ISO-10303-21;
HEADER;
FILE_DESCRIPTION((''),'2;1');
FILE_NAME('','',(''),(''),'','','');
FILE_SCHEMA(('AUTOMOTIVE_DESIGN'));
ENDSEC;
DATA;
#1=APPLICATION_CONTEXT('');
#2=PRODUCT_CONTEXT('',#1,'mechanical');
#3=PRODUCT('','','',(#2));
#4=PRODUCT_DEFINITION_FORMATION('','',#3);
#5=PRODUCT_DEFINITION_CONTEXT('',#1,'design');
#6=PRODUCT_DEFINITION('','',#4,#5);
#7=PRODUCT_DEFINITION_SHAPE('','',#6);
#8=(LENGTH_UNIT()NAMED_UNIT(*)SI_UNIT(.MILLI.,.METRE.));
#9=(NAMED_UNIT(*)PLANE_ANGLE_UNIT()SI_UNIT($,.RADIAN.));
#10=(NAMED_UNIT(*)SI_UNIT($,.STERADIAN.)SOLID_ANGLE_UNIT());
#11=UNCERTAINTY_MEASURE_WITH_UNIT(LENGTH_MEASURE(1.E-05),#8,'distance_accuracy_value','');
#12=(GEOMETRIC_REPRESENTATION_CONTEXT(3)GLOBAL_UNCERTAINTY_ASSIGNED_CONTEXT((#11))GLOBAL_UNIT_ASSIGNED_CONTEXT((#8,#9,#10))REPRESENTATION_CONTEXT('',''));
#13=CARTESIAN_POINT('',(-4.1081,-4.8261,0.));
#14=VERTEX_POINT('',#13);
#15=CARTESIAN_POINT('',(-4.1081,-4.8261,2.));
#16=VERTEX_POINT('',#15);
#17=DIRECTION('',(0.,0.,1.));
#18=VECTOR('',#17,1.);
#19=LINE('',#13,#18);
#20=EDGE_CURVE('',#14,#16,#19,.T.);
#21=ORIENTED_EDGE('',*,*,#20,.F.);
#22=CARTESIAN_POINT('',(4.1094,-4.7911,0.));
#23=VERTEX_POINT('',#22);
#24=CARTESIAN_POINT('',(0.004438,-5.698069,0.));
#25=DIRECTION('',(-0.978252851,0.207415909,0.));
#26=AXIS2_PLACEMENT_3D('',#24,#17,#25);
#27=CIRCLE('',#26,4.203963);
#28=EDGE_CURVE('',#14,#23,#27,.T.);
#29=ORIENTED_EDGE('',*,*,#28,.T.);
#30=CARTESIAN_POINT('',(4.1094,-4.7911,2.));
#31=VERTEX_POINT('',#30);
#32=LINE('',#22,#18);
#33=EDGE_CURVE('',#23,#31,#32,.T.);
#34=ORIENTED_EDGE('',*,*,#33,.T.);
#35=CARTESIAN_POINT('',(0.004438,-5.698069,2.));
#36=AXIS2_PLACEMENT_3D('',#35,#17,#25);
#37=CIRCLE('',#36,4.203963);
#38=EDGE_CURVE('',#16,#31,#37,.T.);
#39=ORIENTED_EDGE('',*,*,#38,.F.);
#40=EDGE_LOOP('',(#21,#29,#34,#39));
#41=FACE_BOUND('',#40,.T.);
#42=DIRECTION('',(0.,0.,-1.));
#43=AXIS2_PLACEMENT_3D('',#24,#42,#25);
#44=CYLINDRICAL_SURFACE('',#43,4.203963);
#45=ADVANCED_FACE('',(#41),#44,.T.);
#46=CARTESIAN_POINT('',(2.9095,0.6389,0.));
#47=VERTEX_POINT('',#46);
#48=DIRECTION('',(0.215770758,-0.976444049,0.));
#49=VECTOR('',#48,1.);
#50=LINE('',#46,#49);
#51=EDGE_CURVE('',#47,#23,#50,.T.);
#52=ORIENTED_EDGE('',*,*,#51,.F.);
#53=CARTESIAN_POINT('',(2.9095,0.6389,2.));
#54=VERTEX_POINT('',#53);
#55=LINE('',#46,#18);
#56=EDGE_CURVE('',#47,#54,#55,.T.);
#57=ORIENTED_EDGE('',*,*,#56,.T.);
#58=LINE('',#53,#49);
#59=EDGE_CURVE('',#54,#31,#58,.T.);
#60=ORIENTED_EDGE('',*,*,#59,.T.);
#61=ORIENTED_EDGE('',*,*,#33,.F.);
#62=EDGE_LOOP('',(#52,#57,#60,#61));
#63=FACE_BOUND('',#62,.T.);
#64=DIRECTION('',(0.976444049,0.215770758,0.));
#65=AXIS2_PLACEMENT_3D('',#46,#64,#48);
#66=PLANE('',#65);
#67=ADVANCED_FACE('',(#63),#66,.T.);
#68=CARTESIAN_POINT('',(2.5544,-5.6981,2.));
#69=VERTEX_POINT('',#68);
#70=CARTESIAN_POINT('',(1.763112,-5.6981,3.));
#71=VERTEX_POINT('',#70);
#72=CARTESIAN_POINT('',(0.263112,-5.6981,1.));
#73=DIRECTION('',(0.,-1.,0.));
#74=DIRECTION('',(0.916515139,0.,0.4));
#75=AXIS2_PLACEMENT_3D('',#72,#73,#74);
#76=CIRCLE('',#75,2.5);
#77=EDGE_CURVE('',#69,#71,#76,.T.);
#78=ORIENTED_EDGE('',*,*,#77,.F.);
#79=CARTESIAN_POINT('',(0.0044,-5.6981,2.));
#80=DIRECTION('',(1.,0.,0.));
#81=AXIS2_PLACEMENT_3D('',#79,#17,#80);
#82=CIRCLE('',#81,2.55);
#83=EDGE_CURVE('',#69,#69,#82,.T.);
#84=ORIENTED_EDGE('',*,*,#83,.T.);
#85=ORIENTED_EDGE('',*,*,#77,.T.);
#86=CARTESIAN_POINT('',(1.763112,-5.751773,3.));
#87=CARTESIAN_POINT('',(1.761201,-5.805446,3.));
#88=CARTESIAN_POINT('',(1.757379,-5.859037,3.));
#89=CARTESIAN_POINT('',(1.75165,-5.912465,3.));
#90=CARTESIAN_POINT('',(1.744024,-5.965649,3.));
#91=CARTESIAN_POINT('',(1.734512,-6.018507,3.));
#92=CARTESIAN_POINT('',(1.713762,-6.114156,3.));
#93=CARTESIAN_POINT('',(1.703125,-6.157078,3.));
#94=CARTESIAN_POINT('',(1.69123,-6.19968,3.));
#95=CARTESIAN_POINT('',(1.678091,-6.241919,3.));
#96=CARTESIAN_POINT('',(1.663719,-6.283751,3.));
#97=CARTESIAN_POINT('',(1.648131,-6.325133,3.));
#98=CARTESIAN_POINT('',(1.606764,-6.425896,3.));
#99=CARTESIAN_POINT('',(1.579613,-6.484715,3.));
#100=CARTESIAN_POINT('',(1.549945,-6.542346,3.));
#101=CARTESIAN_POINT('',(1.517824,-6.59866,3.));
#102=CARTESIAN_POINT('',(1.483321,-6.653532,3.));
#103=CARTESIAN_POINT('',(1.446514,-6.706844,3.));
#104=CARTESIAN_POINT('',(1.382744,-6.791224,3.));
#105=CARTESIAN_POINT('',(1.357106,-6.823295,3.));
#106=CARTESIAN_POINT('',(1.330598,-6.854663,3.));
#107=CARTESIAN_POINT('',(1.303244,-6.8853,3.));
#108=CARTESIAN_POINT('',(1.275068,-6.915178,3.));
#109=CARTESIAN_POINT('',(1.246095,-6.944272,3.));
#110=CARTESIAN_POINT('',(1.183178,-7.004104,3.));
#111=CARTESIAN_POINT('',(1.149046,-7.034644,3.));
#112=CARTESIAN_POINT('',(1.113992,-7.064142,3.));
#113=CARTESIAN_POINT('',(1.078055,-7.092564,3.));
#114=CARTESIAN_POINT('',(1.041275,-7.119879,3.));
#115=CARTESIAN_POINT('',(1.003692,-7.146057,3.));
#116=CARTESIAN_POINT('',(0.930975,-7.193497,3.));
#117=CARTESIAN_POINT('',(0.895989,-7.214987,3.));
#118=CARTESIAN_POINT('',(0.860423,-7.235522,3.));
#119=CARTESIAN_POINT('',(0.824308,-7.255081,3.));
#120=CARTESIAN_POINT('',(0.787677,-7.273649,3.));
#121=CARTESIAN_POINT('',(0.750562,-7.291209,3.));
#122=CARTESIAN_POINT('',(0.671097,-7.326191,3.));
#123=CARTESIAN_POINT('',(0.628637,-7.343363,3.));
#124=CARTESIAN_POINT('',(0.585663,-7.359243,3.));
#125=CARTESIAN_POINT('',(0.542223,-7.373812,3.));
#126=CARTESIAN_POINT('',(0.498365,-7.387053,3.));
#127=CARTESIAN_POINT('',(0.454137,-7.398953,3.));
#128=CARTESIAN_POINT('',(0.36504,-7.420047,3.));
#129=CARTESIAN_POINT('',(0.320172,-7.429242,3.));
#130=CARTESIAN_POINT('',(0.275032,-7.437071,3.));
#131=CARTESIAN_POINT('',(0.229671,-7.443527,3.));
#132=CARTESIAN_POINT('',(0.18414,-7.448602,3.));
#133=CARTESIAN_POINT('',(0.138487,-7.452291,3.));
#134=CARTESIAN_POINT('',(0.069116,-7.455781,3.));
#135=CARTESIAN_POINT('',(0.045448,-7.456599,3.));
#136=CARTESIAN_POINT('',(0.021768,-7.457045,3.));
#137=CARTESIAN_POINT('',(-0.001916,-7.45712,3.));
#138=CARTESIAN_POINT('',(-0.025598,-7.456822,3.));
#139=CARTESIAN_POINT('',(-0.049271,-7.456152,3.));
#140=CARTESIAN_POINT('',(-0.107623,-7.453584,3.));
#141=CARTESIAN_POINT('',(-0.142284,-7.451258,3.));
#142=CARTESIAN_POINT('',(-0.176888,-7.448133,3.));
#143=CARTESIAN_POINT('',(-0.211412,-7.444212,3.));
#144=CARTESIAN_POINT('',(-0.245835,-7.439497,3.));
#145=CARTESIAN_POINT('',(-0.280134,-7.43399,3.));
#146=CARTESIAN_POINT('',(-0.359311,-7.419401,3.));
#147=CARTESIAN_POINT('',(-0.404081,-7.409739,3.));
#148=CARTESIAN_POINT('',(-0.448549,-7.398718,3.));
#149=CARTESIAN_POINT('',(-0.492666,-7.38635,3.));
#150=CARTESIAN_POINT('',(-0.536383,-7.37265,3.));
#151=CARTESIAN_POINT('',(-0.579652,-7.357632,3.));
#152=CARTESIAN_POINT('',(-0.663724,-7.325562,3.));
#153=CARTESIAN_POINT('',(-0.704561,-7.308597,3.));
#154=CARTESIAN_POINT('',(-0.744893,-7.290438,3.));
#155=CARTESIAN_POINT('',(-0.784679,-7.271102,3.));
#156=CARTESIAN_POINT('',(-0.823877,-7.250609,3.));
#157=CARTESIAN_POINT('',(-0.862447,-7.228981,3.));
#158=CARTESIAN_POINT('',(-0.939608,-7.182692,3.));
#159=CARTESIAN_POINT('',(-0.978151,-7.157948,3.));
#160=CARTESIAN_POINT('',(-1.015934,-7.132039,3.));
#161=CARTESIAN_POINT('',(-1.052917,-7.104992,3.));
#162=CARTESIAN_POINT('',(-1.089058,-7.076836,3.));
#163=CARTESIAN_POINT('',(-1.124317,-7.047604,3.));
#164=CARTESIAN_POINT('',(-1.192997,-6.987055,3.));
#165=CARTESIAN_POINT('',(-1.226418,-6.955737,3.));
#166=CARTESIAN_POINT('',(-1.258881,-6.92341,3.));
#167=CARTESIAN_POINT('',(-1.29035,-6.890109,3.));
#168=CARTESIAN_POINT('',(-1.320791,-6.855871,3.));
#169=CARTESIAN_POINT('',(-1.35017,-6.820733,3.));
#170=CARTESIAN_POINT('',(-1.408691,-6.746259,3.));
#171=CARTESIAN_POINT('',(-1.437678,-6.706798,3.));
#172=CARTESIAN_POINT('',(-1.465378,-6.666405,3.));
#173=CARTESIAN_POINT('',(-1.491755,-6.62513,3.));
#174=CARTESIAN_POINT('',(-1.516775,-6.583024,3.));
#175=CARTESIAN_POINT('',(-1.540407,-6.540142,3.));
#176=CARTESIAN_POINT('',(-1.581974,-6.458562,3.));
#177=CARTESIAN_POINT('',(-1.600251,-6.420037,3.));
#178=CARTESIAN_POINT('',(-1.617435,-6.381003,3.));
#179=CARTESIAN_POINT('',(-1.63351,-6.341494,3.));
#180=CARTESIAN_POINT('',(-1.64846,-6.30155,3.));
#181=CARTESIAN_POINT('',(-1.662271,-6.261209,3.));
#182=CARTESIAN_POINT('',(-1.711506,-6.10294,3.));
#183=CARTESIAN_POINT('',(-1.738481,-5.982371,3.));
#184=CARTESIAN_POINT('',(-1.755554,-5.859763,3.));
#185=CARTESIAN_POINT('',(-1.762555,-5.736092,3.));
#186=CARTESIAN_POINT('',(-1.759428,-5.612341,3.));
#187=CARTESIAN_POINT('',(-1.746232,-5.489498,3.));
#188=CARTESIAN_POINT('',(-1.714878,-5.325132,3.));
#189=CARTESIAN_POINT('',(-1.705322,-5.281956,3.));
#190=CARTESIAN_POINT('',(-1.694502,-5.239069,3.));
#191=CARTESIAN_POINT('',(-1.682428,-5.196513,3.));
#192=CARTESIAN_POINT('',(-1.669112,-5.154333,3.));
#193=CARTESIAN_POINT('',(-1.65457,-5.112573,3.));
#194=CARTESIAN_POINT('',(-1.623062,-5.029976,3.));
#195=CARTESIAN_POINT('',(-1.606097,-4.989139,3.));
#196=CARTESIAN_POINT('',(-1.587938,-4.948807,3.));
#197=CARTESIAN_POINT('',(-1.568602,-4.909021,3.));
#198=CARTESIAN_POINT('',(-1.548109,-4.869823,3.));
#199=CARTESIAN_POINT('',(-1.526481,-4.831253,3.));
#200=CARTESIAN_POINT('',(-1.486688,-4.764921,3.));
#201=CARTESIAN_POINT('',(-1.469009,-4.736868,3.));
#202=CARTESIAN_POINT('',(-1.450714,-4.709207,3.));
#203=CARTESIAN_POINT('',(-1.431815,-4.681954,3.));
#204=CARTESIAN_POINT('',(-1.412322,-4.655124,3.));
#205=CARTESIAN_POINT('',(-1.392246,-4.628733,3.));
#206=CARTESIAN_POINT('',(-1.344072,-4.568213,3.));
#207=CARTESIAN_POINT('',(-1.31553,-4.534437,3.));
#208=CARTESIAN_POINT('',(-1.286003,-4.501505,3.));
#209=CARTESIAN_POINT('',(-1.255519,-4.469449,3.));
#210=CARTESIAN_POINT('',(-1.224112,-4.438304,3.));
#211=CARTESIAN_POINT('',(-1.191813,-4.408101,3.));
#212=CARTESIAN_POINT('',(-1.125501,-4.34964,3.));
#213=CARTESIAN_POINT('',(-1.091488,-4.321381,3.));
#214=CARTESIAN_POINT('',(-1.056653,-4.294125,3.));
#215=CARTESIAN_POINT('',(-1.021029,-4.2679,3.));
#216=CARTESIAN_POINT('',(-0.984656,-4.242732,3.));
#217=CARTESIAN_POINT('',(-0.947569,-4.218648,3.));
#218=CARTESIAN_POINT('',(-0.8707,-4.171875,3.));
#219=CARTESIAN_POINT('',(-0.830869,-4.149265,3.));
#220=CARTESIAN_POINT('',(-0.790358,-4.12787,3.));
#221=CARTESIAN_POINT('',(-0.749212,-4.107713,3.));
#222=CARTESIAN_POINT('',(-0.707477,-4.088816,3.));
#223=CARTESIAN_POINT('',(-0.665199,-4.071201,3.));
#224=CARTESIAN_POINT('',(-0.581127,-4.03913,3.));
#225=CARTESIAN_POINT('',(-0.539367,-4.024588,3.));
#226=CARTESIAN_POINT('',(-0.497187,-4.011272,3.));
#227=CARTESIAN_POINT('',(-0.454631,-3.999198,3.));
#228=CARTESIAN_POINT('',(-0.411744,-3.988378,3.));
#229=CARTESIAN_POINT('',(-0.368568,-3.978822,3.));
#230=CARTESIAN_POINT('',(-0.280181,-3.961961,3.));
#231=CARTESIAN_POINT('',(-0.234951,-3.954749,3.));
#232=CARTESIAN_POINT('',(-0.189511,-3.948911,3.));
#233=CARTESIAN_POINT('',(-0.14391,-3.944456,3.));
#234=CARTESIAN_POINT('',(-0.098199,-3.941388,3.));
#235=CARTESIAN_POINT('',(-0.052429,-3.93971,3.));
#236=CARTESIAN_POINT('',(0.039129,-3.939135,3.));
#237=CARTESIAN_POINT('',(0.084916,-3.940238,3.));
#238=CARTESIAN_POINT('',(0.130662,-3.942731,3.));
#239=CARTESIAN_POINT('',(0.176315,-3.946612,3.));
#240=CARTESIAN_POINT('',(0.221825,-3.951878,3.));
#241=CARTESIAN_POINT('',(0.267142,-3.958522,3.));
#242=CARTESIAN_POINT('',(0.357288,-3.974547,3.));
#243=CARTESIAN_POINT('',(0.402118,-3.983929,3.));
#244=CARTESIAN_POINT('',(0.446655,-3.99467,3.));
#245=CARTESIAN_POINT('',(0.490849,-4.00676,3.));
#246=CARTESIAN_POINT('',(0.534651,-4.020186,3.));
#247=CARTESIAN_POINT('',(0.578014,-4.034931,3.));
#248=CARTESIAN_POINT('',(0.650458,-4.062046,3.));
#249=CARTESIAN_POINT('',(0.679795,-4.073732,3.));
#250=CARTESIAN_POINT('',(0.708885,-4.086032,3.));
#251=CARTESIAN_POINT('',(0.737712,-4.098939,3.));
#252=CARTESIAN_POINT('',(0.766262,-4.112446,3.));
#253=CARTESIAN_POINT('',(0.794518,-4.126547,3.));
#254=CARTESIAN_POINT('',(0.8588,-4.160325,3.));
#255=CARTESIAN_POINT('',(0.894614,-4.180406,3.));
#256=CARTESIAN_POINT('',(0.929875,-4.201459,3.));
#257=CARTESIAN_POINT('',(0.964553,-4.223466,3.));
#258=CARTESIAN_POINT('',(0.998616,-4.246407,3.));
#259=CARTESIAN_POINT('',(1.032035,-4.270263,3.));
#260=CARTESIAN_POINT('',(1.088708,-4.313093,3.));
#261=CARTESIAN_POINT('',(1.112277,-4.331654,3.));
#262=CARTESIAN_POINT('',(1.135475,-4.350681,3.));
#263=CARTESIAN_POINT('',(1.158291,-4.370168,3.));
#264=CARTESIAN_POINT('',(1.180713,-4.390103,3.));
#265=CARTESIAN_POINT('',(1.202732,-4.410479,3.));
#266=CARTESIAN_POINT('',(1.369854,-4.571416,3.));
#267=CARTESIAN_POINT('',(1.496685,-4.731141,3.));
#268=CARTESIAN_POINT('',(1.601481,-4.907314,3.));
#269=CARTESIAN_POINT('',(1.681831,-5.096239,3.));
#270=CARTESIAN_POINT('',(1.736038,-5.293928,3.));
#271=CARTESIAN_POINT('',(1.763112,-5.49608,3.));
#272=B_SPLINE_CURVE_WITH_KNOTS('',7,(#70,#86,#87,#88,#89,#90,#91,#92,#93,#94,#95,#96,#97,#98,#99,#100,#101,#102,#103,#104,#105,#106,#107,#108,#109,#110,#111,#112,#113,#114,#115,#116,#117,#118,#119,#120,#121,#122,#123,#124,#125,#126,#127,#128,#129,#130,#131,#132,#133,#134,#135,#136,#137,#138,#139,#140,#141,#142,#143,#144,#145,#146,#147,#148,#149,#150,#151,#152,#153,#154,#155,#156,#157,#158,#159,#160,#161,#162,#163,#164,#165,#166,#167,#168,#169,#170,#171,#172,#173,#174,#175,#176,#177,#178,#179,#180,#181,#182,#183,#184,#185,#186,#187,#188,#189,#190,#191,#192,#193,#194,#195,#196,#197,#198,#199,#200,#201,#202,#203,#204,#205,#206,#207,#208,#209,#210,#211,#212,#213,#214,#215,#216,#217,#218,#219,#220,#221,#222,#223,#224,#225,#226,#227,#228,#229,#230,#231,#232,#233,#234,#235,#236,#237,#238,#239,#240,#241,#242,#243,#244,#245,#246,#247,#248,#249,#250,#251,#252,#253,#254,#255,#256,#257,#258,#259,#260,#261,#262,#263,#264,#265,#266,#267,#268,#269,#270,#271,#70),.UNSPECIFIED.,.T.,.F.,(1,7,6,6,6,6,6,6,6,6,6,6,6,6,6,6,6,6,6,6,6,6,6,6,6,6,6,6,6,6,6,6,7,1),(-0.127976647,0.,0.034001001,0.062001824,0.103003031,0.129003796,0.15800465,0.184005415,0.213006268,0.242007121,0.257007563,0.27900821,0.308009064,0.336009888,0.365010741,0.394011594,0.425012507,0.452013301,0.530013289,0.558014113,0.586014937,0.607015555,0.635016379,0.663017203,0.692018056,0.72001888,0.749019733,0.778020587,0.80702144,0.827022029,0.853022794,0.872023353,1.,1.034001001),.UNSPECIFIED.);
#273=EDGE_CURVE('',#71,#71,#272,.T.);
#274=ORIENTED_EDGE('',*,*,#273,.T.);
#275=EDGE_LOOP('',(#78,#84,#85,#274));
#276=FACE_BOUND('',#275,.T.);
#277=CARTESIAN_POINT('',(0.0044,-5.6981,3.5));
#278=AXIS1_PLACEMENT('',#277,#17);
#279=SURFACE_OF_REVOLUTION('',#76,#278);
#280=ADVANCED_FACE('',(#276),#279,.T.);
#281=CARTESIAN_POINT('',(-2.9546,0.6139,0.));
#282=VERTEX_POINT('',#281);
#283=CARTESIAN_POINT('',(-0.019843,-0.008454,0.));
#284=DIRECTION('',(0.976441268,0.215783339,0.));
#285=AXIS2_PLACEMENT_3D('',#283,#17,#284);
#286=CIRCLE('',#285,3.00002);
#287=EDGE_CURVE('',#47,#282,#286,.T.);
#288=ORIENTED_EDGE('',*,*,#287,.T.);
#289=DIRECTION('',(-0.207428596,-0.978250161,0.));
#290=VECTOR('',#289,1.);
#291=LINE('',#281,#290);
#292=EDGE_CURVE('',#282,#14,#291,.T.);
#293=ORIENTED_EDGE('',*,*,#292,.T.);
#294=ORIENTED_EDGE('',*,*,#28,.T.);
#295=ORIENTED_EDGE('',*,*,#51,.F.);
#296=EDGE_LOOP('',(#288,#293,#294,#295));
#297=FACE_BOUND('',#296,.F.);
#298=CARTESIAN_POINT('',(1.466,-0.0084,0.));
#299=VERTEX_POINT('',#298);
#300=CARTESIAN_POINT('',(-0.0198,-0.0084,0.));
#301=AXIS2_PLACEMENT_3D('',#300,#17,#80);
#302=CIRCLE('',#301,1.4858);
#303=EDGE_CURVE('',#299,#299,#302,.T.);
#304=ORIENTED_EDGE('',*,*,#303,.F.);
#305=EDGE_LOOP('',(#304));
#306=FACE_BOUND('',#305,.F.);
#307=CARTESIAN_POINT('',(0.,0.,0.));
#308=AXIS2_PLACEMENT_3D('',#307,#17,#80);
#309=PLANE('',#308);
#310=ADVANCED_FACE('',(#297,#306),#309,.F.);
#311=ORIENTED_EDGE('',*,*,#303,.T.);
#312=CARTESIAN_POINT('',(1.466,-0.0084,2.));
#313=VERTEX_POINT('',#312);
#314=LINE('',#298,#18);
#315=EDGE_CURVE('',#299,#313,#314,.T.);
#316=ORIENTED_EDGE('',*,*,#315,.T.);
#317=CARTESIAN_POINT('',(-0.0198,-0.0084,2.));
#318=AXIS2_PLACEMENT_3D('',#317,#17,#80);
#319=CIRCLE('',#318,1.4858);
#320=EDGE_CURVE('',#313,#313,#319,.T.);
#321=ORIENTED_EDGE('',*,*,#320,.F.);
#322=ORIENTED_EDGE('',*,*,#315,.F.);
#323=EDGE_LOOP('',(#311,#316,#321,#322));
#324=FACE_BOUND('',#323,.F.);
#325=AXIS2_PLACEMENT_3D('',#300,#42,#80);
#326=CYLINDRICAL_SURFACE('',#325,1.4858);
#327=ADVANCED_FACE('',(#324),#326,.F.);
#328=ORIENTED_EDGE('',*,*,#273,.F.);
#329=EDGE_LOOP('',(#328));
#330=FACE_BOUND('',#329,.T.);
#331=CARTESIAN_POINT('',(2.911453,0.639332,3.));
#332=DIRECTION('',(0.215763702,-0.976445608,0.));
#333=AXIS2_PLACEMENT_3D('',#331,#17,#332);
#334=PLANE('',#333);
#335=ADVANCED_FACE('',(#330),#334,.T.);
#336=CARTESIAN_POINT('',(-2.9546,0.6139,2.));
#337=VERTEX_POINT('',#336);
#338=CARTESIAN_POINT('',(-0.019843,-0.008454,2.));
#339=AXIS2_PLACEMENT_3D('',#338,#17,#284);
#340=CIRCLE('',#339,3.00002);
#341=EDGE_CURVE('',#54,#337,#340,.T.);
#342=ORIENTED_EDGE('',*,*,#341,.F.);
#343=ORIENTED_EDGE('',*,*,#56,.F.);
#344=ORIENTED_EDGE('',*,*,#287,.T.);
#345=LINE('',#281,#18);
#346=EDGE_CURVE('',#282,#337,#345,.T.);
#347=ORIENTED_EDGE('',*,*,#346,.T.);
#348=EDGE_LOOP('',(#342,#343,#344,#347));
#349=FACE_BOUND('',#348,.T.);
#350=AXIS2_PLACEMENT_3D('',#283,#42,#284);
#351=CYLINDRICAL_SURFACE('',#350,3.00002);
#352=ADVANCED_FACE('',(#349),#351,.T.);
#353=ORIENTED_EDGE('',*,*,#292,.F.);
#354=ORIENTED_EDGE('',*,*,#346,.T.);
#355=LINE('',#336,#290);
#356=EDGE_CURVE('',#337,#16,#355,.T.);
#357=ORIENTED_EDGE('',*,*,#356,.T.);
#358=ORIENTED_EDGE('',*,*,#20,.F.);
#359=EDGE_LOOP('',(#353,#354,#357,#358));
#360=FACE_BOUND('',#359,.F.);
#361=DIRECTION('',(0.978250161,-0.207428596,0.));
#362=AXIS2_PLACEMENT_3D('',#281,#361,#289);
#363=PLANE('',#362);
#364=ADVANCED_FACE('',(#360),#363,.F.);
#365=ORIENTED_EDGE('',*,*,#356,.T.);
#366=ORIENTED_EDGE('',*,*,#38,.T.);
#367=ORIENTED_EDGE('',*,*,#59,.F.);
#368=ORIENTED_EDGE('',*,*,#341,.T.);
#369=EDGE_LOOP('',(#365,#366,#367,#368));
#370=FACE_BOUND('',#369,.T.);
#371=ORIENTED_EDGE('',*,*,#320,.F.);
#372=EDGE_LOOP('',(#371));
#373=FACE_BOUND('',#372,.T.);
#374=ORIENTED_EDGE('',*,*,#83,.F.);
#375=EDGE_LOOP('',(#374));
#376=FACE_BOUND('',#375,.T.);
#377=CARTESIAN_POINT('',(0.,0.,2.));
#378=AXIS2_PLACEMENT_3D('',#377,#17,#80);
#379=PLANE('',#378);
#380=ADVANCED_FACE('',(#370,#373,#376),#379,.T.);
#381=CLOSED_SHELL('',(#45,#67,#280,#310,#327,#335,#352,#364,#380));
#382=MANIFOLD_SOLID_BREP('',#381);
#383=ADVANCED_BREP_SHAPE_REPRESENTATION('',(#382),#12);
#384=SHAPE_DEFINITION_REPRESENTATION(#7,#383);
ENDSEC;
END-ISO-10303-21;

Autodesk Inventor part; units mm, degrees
ref_plane "YZ Plane" through (0, 0, 0) normal (1, 0, 0) x (0, 1, 0)
ref_plane "XZ Plane" through (0, 0, 0) normal (0, 1, 0) x (-1, 0, 0)
ref_plane "XY Plane" through (0, 0, 0) normal (0, 0, 1) x (1, 0, 0)
sketch "Sketch1" plane through (0, 0, 0) normal (0, 0, 1) x (1, 0, 0)
  circle A0 centre (-0.0198, -0.0084) radius 1.4858
  arc A1 (0.0044, -3.1481) -> (0.0044, -8.2481) centre (0.0044, -5.6981) ccw construction
  arc A2 (0.0044, -8.2481) -> (0.0044, -3.1481) centre (0.0044, -5.6981) ccw construction
  line L0 (-5.8056, -3.1481) -> (0.0044, -3.1481) construction
  line L1 (0.0044, -8.2481) -> (-5.8056, -8.2481) construction
  line L2 (2.5544, -5.6981) -> (5.0544, -5.6981) construction
  line L3 (-5.8056, -3.1481) -> (-5.8056, -8.2481) construction
  arc A3 (2.9095, 0.6389) -> (-2.9546, 0.6139) centre (-0.0198, -0.0084) ccw
  arc A4 (-4.1081, -4.8261) -> (4.1094, -4.7911) centre (0.0044, -5.6981) ccw
  line L4 (2.9095, 0.6389) -> (4.1094, -4.7911)
  line L5 (-2.9546, 0.6139) -> (-4.1081, -4.8261)
  point P0 (0, 0)
  dimension "d0" = 2.5
  dimension "d1" = 6
extrude "Extrusion1" add sketch "Sketch1" along normal blind 2
sketch "Sketch2" plane through (0, 0, 2) normal (0, 0, 1) x (1, 0, 0)
  circle A0 centre (-0.0198, -0.0084) radius 1.4858
  arc A1 (0.0044, -3.1481) -> (0.0044, -8.2481) centre (0.0044, -5.6981) ccw construction
  arc A2 (0.0044, -8.2481) -> (0.0044, -3.1481) centre (0.0044, -5.6981) ccw construction
  line L0 (-5.8056, -3.1481) -> (0.0044, -3.1481) construction
  line L1 (0.0044, -8.2481) -> (-5.8056, -8.2481) construction
  line L2 (2.5544, -5.6981) -> (5.0544, -5.6981) construction
  line L3 (-5.8056, -3.1481) -> (-5.8056, -8.2481) construction
  arc A3 (2.9095, 0.6389) -> (-2.9546, 0.6139) centre (-0.0198, -0.0084) ccw
  arc A4 (-4.1081, -4.8261) -> (4.1094, -4.7911) centre (0.0044, -5.6981) ccw
  line L4 (2.9095, 0.6389) -> (4.1094, -4.7911)
  line L5 (-2.9546, 0.6139) -> (-4.1081, -4.8261)
  circle A5 centre (0.0044, -5.6981) radius 2.55
  point P0 (0, 0)
  point P1 (0, 0)
  dimension "d4" = 2.5
  dimension "d5" = 6
extrude "Extrusion2" add sketch "Sketch2" along normal blind 1.5 contours A5
fillet "Fillet1" radius 2.5 1 edges at (-2.5456, -5.6981, 3.5)
sketch "Sketch3" plane through (2.9095, 0.6389, 2) normal (0.9764456, 0.2157637, 0) x (0, 0, -1)
  line L0 (0, 3) -> (0, 0) projected
  line L1 (0, 0) -> (-1, 0)
  line L2 (-1, 0) -> (-1, -8.6875)
  line L3 (-1, -8.6875) -> (-2.9665, -8.6875)
  line L4 (-2.9665, -8.6875) -> (-2.9665, 0)
  line L5 (-2.9665, 0) -> (-1, 0)
  point P0 (2, 0.0039)
  point P1 (0, 1.2408)
  dimension "d9" = 1
extrude "Extrusion3" cut sketch "Sketch3" against normal blind 10
properties part number "Stylis holder"
